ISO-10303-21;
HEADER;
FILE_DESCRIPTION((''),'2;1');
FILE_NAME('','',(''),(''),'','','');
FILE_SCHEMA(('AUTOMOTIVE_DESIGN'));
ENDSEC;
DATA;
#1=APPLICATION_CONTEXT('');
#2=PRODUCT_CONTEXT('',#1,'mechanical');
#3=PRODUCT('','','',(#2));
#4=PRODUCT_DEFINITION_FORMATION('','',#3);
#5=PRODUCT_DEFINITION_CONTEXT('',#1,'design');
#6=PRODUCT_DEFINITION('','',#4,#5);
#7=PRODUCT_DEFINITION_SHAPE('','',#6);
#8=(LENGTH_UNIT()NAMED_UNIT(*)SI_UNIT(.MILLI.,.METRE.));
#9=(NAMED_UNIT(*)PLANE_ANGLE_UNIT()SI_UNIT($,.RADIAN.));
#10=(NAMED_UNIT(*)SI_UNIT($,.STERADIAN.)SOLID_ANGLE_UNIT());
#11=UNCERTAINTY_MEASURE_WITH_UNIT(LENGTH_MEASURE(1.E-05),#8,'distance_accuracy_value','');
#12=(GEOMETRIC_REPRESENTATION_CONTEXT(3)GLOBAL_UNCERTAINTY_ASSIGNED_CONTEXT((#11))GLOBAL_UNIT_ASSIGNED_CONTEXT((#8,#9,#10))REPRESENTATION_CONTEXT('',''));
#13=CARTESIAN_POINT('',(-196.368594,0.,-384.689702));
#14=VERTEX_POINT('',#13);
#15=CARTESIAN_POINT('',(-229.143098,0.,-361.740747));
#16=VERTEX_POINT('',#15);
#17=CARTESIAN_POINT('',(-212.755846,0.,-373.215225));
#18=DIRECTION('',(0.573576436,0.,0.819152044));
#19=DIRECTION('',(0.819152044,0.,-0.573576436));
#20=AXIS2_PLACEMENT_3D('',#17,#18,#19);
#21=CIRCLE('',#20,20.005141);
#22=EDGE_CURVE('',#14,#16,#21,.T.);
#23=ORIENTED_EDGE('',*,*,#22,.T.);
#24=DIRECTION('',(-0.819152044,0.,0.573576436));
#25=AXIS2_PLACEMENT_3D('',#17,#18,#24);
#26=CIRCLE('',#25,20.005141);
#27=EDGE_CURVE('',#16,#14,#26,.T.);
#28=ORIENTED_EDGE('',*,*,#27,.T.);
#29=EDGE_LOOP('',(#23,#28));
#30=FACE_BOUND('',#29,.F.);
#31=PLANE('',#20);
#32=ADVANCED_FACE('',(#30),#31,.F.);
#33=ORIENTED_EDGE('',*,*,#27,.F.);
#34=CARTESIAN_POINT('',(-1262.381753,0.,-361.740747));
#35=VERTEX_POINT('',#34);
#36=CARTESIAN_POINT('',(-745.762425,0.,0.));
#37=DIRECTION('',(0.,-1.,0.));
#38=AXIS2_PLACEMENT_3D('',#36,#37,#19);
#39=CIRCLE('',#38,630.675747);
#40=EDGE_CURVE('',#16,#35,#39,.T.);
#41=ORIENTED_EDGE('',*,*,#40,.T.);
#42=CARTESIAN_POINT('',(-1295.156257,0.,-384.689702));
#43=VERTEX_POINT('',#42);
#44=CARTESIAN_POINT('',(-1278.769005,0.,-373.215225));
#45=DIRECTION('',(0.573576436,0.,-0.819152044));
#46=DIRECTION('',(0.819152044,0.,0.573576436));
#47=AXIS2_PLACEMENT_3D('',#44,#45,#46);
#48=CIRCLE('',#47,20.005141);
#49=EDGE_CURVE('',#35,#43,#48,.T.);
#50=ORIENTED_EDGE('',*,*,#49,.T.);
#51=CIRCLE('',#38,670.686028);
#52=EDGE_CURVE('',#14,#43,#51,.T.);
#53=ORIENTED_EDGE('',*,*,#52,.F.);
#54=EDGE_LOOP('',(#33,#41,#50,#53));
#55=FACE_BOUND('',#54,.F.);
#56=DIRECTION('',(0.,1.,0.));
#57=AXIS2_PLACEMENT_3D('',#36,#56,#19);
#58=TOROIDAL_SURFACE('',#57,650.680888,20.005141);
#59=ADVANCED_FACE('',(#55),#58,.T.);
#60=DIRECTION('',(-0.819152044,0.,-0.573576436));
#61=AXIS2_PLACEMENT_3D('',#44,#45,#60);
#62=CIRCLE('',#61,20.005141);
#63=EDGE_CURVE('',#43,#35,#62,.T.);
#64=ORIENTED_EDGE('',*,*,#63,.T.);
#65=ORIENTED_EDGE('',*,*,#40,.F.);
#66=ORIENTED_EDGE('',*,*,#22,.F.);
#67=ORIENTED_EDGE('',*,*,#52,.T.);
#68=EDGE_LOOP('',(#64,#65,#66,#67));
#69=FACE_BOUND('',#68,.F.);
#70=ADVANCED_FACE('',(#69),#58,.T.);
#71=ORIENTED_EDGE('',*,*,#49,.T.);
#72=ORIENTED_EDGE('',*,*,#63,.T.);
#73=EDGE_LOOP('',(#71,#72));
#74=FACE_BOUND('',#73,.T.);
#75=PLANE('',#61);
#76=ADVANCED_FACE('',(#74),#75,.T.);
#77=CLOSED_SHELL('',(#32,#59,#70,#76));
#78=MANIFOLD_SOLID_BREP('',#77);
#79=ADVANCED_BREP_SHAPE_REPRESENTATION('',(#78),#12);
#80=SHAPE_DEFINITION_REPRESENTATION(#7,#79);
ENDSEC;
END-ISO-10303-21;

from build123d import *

# Parameters (mm, degrees)
F1_ANGLE_BACK = 35
F1_ANGLE      = 250


# Not quite as in the source:
# - a feature names something its author has since deleted; it is built from what else it names


with BuildPart() as f1:
    # F0 (on Top) → F1 (revolve)
    with BuildSketch(Plane.XY, mode=Mode.PRIVATE) as f1_sk:
        with BuildLine():
            ThreePointArc((-115.0866788832, 0), (-95.081537962, -20.0051409212), (-75.0763970407, 0))
            ThreePointArc((-75.0763970407, 0), (-95.081537962, 20.0051409212), (-115.0866788832, 0))
        make_face()
    revolve(f1_sk.sketch.rotate(Axis((-745.7624254748, 0, 0), (0, -1, 0)), -F1_ANGLE_BACK), axis=Axis((-745.7624254748, 0, 0), (0, -1, 0)), revolution_arc=F1_ANGLE)


solid = f1.part
